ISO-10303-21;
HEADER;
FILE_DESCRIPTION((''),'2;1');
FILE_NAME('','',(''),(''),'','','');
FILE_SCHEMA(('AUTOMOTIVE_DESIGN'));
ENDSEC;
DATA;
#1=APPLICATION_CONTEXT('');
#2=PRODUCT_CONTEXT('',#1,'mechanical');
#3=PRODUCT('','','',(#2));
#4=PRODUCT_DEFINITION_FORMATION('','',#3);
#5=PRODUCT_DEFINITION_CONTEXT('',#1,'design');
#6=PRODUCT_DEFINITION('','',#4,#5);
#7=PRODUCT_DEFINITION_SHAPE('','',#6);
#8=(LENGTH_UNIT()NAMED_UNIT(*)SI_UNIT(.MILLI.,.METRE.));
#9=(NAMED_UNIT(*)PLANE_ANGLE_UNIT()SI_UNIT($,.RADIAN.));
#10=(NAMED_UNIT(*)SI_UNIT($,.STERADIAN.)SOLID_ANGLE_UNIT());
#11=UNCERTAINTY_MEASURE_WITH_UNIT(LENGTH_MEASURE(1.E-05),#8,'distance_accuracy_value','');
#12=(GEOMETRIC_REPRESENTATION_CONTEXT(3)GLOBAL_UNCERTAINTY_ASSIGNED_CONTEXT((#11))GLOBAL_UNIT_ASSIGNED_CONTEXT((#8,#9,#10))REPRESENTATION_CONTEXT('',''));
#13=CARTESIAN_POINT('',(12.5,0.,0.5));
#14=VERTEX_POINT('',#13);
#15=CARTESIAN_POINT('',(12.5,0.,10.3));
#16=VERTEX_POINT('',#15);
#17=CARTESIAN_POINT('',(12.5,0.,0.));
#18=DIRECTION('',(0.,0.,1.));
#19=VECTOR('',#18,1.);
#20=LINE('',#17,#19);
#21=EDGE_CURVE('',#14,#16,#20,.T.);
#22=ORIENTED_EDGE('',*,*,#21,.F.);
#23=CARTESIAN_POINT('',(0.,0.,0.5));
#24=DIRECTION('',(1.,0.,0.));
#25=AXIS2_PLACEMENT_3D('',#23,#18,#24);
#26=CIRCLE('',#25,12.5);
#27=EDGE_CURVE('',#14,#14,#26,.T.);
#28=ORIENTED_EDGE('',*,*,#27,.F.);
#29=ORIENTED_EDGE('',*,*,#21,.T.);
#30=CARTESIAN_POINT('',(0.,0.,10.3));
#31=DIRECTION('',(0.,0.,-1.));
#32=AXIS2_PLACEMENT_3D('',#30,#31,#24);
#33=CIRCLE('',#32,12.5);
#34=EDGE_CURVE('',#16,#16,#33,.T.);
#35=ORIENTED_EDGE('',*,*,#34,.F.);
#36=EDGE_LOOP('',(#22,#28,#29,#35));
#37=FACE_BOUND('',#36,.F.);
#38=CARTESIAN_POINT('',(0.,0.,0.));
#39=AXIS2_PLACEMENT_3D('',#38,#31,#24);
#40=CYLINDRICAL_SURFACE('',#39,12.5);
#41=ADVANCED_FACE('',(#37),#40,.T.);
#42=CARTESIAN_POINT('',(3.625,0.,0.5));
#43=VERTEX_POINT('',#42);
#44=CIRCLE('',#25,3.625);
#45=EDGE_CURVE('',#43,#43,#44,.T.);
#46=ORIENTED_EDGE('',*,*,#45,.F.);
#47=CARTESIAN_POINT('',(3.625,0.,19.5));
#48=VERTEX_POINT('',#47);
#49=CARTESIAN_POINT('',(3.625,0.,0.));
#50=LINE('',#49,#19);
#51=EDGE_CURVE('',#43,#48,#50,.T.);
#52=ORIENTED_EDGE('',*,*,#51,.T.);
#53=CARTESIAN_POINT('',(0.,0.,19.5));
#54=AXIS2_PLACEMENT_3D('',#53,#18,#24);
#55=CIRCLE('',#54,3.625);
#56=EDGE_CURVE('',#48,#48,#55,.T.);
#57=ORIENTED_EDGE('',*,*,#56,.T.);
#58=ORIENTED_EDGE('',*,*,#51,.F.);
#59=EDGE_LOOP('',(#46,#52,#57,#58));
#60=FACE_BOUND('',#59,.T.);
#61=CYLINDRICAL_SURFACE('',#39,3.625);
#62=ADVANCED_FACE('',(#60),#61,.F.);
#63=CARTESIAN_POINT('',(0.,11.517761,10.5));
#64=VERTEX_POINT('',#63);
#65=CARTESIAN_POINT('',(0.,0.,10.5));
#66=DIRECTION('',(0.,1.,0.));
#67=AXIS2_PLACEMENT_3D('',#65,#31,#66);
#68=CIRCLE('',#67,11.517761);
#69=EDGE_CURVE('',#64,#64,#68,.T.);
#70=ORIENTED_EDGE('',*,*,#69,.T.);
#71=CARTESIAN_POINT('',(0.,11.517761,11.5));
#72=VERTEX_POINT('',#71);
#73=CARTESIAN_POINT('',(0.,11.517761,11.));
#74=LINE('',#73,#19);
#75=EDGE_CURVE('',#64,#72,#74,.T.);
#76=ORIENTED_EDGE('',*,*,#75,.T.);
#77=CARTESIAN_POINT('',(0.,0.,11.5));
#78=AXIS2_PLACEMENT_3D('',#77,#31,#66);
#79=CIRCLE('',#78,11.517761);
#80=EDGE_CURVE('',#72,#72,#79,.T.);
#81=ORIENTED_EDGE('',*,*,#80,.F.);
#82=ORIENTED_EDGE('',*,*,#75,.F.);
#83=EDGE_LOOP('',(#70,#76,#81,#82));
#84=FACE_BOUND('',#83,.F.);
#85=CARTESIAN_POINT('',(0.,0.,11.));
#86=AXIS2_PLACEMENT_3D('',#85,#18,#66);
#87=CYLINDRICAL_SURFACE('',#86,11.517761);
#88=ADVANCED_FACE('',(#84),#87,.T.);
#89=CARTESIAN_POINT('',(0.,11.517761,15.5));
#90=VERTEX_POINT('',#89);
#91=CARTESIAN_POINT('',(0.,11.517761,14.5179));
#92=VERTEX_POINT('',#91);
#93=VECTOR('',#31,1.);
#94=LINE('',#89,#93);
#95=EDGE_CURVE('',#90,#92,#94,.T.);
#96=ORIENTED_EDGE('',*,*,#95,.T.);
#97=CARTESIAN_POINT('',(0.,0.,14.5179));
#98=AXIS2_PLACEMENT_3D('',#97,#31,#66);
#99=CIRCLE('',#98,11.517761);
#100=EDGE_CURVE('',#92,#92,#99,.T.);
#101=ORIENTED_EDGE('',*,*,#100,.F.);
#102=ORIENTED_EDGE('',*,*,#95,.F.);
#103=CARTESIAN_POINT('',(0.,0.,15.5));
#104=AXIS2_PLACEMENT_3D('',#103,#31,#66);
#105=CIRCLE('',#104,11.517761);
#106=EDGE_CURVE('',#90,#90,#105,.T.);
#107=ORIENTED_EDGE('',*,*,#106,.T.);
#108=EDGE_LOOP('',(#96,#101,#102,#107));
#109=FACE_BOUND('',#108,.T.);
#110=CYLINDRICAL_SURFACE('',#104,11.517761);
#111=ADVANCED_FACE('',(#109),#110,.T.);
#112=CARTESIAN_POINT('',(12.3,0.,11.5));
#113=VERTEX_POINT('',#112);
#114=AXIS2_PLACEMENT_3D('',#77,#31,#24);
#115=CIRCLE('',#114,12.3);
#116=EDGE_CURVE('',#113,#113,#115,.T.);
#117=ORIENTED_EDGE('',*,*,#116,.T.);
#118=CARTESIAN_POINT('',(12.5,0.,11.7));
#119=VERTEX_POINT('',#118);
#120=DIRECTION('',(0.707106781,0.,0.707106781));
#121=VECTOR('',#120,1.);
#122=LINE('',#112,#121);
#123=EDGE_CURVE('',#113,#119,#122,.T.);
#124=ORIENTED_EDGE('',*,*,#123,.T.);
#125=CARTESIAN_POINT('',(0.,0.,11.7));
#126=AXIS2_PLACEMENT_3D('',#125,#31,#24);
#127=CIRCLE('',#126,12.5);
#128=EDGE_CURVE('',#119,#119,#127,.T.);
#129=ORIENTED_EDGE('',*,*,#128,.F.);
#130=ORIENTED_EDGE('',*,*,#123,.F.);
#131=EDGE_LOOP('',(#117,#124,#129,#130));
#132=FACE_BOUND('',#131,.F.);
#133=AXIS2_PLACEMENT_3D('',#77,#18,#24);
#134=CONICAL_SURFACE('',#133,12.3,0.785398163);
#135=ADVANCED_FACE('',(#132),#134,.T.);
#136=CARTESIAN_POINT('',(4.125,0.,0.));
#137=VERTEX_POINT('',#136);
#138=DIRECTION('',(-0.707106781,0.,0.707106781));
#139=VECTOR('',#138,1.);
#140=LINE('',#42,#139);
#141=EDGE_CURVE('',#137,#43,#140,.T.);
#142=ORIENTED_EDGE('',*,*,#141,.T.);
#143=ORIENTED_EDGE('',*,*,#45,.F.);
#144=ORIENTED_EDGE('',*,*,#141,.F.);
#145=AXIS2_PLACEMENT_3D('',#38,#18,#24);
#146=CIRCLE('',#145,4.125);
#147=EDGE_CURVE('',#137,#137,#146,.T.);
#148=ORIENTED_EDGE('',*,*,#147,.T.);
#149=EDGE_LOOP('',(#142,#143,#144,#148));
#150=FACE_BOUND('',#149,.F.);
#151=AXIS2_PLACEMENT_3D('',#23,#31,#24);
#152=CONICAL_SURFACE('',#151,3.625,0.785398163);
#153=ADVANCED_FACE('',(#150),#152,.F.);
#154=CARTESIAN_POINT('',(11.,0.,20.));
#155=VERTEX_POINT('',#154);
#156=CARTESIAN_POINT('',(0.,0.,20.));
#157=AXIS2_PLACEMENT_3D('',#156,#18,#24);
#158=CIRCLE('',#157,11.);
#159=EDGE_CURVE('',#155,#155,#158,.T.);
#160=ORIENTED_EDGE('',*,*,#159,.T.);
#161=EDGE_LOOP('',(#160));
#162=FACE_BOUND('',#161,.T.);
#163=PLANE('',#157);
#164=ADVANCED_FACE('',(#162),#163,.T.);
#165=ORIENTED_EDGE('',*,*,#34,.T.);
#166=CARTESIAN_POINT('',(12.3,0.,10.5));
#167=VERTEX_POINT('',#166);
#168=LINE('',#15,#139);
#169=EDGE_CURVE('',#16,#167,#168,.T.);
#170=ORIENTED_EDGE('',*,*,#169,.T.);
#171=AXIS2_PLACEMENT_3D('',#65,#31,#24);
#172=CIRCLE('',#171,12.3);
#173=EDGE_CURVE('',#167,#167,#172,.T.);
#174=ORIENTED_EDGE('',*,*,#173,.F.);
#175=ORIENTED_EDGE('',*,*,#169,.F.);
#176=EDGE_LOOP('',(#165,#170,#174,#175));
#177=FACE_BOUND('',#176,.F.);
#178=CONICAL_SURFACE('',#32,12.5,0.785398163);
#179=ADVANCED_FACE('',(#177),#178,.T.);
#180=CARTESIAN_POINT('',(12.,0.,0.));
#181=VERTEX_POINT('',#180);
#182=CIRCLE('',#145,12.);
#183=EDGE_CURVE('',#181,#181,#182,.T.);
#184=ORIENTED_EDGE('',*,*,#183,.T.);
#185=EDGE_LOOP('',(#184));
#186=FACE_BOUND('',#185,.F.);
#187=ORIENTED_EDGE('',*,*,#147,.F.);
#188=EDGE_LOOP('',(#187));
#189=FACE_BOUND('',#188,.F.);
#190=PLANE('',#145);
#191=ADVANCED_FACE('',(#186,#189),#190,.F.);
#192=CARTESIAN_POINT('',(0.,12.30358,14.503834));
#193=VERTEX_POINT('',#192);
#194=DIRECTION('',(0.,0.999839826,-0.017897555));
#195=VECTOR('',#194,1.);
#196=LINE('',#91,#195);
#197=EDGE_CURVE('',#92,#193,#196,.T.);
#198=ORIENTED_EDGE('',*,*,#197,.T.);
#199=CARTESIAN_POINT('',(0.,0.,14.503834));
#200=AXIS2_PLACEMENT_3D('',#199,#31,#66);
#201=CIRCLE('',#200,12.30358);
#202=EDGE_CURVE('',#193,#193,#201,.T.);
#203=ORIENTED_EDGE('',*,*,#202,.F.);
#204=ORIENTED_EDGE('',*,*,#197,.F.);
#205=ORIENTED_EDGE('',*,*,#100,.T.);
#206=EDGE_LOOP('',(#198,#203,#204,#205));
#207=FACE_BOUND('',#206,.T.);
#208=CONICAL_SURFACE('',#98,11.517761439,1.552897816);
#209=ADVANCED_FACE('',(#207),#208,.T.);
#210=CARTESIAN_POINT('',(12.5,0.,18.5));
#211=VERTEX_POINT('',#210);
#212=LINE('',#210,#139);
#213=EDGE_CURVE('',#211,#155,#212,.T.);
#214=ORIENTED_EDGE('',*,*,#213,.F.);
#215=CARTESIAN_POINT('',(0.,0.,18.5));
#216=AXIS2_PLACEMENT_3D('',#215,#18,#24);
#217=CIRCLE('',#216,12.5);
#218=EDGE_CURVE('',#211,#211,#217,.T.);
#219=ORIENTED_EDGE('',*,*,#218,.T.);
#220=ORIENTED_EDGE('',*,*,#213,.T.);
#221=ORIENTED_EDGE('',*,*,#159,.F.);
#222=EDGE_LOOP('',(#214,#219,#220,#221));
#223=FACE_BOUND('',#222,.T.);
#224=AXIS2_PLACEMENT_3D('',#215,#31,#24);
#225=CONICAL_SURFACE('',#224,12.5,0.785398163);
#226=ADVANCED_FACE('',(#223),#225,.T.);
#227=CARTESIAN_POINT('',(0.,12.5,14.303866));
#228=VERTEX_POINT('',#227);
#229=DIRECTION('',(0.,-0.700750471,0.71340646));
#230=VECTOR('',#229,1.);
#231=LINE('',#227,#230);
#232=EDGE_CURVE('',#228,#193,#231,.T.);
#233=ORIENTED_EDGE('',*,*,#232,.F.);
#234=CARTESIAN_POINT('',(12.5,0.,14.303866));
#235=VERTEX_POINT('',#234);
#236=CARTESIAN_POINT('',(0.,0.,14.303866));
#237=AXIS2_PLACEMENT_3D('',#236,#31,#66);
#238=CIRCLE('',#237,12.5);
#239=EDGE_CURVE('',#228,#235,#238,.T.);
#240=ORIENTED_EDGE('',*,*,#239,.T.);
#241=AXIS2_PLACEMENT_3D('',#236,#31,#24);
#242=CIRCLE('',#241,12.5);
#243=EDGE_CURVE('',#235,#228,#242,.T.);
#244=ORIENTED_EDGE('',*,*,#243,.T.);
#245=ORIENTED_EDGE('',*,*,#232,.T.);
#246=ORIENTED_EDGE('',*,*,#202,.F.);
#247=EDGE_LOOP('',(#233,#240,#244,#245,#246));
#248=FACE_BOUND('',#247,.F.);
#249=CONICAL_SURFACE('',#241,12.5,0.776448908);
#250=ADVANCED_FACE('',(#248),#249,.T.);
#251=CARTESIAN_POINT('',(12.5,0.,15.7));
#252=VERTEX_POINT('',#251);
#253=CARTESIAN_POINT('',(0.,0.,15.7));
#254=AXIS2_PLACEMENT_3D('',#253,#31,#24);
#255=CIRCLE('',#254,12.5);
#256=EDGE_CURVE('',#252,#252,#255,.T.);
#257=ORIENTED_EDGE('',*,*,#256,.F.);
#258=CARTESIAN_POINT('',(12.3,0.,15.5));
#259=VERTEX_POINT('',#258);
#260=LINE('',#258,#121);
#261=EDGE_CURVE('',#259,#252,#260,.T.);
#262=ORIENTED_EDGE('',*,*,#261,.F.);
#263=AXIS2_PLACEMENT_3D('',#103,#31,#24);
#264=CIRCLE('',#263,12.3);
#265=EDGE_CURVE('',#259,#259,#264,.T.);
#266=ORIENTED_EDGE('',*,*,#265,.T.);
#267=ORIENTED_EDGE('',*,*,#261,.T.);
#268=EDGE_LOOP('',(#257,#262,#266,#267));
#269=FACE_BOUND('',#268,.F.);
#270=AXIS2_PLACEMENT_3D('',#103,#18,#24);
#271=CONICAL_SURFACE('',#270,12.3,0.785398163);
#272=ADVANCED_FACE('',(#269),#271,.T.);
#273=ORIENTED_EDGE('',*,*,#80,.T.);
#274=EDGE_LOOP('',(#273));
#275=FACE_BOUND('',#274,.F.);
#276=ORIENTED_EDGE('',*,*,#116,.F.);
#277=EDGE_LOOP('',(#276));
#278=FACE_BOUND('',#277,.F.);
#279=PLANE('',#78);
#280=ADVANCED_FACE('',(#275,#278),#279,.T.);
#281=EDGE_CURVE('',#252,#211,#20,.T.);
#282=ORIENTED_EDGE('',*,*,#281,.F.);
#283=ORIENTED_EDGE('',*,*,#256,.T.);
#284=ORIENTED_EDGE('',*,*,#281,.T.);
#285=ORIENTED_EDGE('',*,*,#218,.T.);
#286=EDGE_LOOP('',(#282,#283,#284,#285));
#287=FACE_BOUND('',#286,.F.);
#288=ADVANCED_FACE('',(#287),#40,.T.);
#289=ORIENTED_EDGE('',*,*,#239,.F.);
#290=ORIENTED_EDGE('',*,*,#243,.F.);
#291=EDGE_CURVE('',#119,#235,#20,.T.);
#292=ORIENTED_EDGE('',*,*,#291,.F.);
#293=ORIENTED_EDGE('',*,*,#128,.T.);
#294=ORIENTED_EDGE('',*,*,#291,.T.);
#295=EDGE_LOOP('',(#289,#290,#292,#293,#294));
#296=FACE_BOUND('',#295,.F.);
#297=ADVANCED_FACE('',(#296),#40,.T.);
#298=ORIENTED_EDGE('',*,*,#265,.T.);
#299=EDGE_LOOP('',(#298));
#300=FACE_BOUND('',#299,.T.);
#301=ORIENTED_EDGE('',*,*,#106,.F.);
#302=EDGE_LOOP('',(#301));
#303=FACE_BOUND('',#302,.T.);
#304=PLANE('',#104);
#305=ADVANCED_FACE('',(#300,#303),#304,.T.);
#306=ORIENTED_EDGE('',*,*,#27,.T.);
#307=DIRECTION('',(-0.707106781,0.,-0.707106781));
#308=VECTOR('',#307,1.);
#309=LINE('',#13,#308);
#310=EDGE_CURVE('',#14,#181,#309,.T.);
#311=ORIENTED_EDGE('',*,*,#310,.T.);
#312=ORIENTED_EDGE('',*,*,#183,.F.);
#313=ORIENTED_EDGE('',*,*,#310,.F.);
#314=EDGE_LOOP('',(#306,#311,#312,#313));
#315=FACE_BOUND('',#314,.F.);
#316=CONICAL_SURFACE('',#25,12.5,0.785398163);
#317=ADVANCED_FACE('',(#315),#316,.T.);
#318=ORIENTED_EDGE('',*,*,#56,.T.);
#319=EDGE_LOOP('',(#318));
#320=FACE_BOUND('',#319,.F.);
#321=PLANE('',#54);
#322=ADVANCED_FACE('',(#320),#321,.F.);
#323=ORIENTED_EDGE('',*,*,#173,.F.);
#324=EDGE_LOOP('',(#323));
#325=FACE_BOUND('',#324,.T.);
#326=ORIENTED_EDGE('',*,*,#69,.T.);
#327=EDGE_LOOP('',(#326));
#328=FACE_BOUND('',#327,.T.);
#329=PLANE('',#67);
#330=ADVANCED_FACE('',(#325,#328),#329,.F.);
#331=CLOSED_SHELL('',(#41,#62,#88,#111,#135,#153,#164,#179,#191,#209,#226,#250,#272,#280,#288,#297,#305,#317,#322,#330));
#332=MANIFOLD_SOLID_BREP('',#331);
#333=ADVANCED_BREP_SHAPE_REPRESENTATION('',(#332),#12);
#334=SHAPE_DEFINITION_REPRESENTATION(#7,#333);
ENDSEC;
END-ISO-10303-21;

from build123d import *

# Parameters (mm, degrees)
F0_R        = 12.5
F1_DEPTH    = 20
F2_R        = 3.625
F3_DEPTH    = 19.5
F4_SIZE     = 1.5
F5_SIZE     = 0.5
F6_W        = 1
F6_H        = 1
F8_T4_ANGLE = 270
F8_T6_ANGLE = 90


# Not quite as in the source:
# - a fillet or chamfer that OpenCascade refuses, or shapes differently, is made with other operations: its cross-section is extruded or revolved along the edge and cut away or added


with BuildPart() as f1:
    # F0 (on Top) → F1 (new body)
    with BuildSketch(Plane.XY):
        Circle(F0_R)
    extrude(amount=F1_DEPTH)

    # F2 (on Top) → F3 (cut)
    with BuildSketch(Plane.XY):
        Circle(F2_R)
    extrude(amount=F3_DEPTH, mode=Mode.SUBTRACT)

    # F4
    f4_edges = [f1.edges().sort_by_distance(p)[0] for p in [
        (-12.5, 0, 20),
    ]]
    chamfer(f4_edges, length=F4_SIZE)

    # F5
    f5_edges = [f1.edges().sort_by_distance(p)[0] for p in [
        (-12.5, 0, 0),
        (-3.625, 0, 0),
    ]]
    chamfer(f5_edges, length=F5_SIZE)

    # F6 (on Right) → F7 (revolve, cut)
    with BuildSketch(Plane.YZ):
        Polygon((12.5177614391, 14.5), (12.5177614391, 15.5), (11.5177614391, 15.5), (11.5177614391, 14.5179004222), align=None)
        with Locations((12.0177614391, 11)):
            Rectangle(F6_W, F6_H)
    revolve(axis=Axis((0, 0, 0), (0, 0, -1)), mode=Mode.SUBTRACT)

    # F8: chamfer of 0.2 on 5 edges, made by hand

    # F8_s1 → F8_t2 (revolve, cut)
    with BuildSketch(Plane.XZ):
        Polygon((12.3, 15.5), (12.5, 15.7), (12.5, 15.5), align=None)
    revolve(axis=Axis((0, 0, 15.5), (0, 0, -1)), mode=Mode.SUBTRACT)

    # F8_s3 → F8_t4 (revolve, cut)
    with BuildSketch(Plane.XZ):
        Polygon((12.5, 14.3038659818), (12.303579511, 14.5038339469), (12.5, 14.5003179373), align=None)
    revolve(axis=Axis((0, 0, 14.5003179373), (0, 0, -1)), revolution_arc=F8_T4_ANGLE, mode=Mode.SUBTRACT)

    # F8_s5 → F8_t6 (revolve, cut)
    with BuildSketch(Plane.YZ):
        Polygon((12.5, 14.3038659818), (12.303579511, 14.5038339469), (12.5, 14.5003179373), align=None)
    revolve(axis=Axis((0, 0, 14.5003179373), (0, 0, -1)), revolution_arc=F8_T6_ANGLE, mode=Mode.SUBTRACT)

    # F8_s7 → F8_t8 (revolve, cut)
    with BuildSketch(Plane.XZ):
        Polygon((12.3, 11.5), (12.5, 11.7), (12.5, 11.5), align=None)
    revolve(axis=Axis((0, 0, 11.5), (0, 0, -1)), mode=Mode.SUBTRACT)

    # F8_s9 → F8_t10 (revolve, cut)
    with BuildSketch(Plane.XZ):
        Polygon((12.5, 10.3), (12.3, 10.5), (12.5, 10.5), align=None)
    revolve(axis=Axis((0, 0, 10.5), (0, 0, -1)), mode=Mode.SUBTRACT)


solid = f1.part
